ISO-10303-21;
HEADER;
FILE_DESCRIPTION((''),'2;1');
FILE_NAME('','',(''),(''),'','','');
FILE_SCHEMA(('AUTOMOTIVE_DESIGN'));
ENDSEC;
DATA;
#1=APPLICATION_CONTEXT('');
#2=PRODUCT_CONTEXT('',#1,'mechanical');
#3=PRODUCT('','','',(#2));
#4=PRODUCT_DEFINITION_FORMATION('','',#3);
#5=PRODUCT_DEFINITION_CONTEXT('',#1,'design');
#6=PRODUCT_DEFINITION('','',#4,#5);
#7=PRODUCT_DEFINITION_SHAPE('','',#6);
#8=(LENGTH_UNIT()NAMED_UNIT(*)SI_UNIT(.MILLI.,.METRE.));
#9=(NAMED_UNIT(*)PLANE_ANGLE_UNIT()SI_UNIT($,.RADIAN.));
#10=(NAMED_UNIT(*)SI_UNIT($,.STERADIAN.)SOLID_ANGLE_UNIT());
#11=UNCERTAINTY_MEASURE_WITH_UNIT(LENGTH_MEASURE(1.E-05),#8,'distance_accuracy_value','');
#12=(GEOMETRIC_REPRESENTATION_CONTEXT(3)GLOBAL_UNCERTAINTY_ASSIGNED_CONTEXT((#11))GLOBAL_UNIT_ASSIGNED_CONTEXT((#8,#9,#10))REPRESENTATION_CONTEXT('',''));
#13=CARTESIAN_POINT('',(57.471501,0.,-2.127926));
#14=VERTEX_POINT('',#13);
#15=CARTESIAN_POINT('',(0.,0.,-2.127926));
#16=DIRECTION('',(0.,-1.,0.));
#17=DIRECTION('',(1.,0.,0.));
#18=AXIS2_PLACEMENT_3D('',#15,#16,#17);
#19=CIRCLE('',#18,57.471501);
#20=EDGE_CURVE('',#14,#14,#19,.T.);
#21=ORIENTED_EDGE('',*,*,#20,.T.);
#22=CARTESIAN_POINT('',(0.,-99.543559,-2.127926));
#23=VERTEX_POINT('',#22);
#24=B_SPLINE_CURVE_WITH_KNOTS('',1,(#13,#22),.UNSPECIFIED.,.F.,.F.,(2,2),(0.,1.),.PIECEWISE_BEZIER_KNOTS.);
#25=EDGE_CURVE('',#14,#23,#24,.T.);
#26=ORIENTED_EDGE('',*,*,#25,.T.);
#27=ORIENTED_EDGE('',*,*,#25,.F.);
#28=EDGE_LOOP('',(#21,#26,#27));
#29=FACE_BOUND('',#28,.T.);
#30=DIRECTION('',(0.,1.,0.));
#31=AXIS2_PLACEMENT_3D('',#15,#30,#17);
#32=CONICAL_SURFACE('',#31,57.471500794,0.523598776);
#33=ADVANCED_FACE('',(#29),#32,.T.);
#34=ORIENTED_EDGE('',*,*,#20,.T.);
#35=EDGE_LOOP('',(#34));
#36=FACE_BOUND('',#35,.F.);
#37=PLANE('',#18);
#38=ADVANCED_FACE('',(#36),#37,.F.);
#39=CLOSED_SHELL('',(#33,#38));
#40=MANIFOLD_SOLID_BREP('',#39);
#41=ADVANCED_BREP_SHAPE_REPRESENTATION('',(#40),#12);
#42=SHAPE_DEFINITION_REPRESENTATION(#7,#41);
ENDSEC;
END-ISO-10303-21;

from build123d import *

# Parameters (mm, degrees)
F0_R = 57.4715007944


# Not quite as in the source:
# - an extrude whose draft closes it to a point is written as a loft to that point


with BuildPart() as f1:
    # F0 (on Front) → F1 section 0
    with BuildSketch(Plane.XZ, mode=Mode.PRIVATE) as f1_s0:
        with Locations((0, -2.1279256325)):
            Circle(F0_R)
    loft([f1_s0.sketch, Vertex(0, -99.5435593631, -2.1279256325)], ruled=True)


solid = f1.part
